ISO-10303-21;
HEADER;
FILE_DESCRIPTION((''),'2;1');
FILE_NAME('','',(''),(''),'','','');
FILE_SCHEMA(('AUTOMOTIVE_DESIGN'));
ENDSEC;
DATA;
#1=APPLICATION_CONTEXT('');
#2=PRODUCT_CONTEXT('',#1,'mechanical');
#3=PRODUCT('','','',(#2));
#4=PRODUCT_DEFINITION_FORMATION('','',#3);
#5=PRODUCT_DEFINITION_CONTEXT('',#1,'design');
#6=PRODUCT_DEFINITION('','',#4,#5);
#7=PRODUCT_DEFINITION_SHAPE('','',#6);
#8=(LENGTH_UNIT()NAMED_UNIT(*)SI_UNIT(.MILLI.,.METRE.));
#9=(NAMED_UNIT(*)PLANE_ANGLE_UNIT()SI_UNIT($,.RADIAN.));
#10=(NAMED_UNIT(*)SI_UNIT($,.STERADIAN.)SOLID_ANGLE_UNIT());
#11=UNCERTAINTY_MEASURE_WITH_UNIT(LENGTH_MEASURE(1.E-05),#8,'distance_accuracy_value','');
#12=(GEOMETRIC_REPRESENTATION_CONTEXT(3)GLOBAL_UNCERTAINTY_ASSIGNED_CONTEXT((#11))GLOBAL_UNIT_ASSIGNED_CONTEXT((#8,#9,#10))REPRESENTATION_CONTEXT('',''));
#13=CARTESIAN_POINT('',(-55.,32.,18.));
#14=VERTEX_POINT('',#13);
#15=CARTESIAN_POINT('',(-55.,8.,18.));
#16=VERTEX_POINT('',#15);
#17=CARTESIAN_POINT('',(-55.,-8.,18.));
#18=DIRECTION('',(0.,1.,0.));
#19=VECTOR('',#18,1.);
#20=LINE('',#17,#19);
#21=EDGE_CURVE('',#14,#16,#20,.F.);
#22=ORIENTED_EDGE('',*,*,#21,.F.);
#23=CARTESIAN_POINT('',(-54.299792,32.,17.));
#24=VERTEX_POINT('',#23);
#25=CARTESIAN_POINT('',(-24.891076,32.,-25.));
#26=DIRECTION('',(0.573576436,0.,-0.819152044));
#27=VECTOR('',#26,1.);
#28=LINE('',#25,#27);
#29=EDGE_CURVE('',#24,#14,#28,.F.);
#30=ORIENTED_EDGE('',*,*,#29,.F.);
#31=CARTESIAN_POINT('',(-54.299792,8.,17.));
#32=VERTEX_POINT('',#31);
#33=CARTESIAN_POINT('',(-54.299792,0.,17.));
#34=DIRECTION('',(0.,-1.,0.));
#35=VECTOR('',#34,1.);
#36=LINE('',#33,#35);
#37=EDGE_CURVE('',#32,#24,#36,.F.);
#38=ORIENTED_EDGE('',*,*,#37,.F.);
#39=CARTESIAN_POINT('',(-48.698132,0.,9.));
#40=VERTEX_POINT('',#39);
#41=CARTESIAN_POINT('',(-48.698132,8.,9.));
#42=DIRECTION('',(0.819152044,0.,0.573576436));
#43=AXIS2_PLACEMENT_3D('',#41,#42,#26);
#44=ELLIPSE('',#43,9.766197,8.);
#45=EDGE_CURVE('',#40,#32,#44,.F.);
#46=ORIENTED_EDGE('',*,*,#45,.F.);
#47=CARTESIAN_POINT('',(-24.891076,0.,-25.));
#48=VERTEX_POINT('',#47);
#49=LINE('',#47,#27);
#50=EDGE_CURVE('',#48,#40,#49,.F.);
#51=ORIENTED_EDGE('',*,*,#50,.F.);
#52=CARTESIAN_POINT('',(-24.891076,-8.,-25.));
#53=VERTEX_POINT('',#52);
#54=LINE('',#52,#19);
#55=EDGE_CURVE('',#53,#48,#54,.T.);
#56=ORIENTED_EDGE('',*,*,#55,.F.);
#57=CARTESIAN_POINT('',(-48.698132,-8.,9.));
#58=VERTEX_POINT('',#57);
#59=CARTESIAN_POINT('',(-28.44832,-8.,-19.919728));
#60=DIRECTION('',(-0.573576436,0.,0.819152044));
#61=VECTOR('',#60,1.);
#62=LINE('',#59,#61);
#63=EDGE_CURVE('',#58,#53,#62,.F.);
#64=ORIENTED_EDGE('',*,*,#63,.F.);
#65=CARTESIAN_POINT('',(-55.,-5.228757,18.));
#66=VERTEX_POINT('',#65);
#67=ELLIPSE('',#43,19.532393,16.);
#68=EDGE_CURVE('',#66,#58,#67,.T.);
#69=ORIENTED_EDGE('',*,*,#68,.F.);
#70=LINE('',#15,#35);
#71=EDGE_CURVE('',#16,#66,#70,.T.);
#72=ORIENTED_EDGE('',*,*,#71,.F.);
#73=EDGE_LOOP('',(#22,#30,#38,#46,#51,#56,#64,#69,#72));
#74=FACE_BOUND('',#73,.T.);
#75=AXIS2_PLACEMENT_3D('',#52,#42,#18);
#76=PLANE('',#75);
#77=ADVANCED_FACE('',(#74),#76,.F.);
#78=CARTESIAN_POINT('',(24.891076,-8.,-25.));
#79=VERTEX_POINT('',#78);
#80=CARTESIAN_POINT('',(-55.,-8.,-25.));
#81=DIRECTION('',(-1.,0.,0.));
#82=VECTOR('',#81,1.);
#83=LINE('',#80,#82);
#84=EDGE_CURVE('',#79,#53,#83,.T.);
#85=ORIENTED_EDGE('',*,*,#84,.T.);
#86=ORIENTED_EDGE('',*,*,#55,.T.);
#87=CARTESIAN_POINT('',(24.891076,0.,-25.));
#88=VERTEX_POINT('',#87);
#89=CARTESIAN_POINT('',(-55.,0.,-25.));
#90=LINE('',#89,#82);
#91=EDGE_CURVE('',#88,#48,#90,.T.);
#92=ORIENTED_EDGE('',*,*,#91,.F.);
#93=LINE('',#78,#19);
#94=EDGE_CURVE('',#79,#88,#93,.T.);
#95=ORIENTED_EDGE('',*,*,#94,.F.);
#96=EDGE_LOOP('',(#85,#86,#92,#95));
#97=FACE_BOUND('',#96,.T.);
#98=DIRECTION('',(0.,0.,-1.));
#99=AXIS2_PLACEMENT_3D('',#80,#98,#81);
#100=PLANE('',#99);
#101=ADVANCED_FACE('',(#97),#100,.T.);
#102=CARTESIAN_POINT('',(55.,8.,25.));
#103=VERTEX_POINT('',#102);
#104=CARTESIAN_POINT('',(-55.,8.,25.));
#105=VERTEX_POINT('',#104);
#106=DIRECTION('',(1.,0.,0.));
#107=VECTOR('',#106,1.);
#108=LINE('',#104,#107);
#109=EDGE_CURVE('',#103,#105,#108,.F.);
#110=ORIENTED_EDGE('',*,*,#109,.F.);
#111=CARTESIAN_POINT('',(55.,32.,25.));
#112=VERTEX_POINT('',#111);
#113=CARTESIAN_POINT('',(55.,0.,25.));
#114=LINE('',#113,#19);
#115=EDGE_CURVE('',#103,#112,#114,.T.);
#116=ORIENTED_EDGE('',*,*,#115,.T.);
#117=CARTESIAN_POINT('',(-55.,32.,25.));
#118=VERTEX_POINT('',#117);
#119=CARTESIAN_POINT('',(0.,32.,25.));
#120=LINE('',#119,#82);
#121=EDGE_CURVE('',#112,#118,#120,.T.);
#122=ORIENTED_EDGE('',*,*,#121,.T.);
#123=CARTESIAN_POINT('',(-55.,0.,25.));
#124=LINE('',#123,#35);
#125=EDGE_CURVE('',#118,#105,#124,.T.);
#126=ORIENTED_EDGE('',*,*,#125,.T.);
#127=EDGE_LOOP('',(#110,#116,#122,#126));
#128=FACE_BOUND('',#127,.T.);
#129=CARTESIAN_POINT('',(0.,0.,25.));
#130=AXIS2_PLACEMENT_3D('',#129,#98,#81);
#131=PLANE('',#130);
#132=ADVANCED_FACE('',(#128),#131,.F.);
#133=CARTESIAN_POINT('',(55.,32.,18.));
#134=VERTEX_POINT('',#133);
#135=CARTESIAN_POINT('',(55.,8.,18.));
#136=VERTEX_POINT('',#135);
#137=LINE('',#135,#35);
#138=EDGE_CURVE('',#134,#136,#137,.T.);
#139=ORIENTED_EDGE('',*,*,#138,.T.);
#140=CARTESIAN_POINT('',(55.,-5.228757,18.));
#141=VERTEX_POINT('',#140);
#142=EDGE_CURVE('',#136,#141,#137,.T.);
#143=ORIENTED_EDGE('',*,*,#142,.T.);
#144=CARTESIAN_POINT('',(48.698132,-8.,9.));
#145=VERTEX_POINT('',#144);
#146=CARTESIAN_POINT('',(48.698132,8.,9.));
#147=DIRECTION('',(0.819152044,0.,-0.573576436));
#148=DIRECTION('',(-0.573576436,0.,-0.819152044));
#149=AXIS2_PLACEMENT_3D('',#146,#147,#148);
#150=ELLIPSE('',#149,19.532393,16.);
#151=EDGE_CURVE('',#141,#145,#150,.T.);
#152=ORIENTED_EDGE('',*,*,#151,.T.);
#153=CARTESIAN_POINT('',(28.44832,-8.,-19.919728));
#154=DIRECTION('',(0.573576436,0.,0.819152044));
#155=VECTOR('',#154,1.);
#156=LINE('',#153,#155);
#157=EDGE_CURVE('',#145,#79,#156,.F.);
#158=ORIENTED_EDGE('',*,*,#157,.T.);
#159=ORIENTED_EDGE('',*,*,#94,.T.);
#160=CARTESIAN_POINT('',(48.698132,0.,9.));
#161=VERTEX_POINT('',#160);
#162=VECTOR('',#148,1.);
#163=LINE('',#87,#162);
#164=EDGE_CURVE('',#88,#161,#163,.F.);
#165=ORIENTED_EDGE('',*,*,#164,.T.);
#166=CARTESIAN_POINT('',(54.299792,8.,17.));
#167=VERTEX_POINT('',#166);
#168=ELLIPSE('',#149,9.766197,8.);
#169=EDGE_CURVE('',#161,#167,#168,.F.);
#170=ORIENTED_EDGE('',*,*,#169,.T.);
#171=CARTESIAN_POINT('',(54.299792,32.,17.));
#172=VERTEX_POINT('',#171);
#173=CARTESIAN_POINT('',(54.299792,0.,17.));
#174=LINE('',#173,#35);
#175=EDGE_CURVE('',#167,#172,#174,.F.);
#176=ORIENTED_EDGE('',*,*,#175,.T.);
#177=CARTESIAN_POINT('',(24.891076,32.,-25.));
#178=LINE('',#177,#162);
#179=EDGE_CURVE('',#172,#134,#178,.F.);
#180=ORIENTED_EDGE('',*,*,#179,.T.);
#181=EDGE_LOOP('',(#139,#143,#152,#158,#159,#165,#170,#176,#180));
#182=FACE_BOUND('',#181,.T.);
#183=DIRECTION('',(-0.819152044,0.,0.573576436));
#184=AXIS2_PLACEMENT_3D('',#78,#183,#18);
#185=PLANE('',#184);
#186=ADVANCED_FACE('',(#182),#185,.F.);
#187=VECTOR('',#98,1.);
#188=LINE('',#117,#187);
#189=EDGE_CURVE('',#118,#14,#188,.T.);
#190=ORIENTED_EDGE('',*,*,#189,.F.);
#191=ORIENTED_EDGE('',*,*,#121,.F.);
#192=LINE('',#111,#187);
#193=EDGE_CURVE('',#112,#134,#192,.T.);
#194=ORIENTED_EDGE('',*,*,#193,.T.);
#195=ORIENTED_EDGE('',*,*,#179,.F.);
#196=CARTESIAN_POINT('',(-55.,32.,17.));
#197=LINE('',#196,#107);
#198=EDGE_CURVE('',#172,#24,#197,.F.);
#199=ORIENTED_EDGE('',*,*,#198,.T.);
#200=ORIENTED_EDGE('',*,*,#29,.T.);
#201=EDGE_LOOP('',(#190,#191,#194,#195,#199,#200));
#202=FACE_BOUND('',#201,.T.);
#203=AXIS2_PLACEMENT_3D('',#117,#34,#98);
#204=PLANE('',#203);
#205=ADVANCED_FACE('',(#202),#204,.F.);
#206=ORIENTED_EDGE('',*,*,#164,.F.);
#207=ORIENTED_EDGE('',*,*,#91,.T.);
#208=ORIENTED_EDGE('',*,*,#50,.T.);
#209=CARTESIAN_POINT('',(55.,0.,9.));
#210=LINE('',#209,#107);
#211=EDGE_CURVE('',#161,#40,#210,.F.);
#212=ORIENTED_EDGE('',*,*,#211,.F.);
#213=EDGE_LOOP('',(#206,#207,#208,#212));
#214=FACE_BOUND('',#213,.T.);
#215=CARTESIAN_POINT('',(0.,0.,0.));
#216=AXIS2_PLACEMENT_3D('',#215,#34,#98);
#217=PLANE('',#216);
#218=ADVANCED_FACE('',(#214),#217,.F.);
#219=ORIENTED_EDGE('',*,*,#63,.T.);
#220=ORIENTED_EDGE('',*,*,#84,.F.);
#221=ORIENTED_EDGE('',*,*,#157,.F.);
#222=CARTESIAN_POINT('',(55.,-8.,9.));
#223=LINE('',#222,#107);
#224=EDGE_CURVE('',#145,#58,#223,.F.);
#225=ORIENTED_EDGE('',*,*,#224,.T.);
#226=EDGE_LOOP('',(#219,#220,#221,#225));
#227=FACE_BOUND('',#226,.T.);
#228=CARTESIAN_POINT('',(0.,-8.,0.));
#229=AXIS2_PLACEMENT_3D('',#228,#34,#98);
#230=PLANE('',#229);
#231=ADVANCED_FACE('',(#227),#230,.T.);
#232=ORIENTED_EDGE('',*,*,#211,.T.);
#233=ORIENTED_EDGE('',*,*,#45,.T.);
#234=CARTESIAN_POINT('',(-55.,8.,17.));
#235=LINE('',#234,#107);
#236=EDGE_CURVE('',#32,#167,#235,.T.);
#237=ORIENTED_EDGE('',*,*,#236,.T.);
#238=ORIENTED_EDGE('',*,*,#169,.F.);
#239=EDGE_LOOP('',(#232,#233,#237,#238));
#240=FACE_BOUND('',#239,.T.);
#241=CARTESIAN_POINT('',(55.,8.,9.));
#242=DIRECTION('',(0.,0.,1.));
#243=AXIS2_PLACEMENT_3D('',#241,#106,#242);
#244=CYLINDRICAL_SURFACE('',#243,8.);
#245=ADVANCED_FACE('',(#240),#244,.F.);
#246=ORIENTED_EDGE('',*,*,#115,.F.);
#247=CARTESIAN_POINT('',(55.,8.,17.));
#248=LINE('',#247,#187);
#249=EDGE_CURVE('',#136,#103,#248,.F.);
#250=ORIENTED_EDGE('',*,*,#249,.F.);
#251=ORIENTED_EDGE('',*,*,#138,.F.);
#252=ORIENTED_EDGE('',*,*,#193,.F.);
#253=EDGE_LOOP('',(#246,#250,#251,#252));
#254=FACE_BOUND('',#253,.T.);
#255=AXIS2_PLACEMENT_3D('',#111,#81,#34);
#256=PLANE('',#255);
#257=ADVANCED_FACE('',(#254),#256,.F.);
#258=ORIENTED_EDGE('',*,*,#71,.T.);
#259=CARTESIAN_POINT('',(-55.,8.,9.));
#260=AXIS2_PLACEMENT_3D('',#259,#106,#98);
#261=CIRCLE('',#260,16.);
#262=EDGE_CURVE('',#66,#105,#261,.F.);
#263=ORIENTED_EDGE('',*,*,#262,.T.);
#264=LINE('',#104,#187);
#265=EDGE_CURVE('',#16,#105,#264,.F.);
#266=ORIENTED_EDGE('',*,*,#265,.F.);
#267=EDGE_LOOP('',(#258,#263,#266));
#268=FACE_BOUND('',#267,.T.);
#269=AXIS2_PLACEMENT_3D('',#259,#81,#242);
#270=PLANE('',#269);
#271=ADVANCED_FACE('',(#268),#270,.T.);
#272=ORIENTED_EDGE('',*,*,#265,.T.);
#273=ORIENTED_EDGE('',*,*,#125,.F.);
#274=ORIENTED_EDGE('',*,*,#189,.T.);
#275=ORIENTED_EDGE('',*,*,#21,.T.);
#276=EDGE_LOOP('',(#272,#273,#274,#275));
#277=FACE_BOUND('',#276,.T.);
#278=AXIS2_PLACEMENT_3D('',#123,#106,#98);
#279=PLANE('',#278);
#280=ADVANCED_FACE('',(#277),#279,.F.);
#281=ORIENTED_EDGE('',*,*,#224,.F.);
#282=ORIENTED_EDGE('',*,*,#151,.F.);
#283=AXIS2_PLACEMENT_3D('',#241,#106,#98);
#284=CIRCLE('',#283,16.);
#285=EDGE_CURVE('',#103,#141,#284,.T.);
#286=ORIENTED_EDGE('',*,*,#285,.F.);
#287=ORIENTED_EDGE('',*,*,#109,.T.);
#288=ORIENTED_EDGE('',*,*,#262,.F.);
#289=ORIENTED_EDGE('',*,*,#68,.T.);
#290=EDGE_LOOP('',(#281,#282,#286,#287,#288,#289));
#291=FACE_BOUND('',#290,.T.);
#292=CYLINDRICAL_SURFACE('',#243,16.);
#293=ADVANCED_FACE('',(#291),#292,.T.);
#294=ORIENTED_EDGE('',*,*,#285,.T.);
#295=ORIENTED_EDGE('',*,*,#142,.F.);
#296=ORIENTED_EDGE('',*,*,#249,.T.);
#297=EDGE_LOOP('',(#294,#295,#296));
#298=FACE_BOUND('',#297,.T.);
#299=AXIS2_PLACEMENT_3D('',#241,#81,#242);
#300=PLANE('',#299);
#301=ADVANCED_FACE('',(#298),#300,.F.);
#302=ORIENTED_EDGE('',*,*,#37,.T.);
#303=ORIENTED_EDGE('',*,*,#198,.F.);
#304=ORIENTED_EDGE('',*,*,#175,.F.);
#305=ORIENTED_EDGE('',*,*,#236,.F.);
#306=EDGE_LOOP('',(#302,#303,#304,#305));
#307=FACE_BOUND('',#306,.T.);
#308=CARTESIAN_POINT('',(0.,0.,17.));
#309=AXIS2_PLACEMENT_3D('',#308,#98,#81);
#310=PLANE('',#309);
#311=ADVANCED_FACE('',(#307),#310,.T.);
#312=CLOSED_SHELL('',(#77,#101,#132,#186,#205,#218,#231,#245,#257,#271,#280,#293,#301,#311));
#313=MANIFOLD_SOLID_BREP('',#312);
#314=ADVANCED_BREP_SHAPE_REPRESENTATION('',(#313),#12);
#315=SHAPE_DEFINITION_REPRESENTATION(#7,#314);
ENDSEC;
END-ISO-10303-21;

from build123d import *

# Parameters (mm, degrees)
SKETCH1_W                    = 110
SKETCH1_H                    = 50
BASE_FLANGE1_DEPTH           = 8
EDGE_FLANGE1_STRIP_W         = 48
EDGE_FLANGE1_STRIP_H         = 8
EDGE_FLANGE1_STRIP_CUT_DEPTH = 110
EDGE_FLANGE1_DEPTH           = 110
CHAMFER1_SIZE                = 43
CHAMFER1_SIZE2               = 30.108924143
MIRROR2_START                = 34.728986582
MIRROR2_OUTLINE_W            = 56
MIRROR2_OUTLINE_H            = 41
MIRROR2_DEPTH                = 24.663786763


# Read off the part's stored shape, not the designer's step: Mirror2
# Sheet-metal steps are written as plain solids
with BuildPart() as part:
    # Sketch1 → Base-Flange1 (new body)
    with BuildSketch(Plane(origin=(0, 0, 0), x_dir=(1, 0, 0), z_dir=(0, 1, 0))):
        Rectangle(SKETCH1_W, SKETCH1_H)
    extrude(amount=-BASE_FLANGE1_DEPTH)

    # Edge-Flange1 strip (across the edge) → Edge-Flange1 strip cut (cut)
    with BuildSketch(Plane(origin=(-55, 0, 25), x_dir=(0, 0, -1), z_dir=(1, 0, 0))):
        with Locations((-8, -4)):
            Rectangle(EDGE_FLANGE1_STRIP_W, EDGE_FLANGE1_STRIP_H)
    extrude(amount=EDGE_FLANGE1_STRIP_CUT_DEPTH, mode=Mode.SUBTRACT)

    # Edge-Flange1 section (across the edge) → Edge-Flange1 (add)
    with BuildSketch(Plane(origin=(-55, 0, 25), x_dir=(0, 0, -1), z_dir=(1, 0, 0))):
        with BuildLine():
            Line((0, 8), (0, 32))
            Line((0, 32), (8, 32))
            Line((8, 32), (8, 8))
            ThreePointArc((8, 8), (10.343145751, 2.343145751), (16, 0))
            Line((16, 0), (16, -8))
            ThreePointArc((16, -8), (4.686291501, -3.313708499), (0, 8))
        make_face()
    extrude(amount=EDGE_FLANGE1_DEPTH)

    # Chamfer1
    chamfer1_edges = [part.edges().sort_by_distance(p)[0] for p in [
        (-55, -4, -25),
    ]]
    chamfer1_side = [part.faces().sort_by_distance(p)[0] for p in [
        (-55, -0.640312424, -8),
    ]]
    chamfer(chamfer1_edges, length=CHAMFER1_SIZE, length2=CHAMFER1_SIZE2, reference=chamfer1_side[0])

    # Mirror2 outline → Mirror2 (cut)
    with BuildSketch(Plane(origin=(0, 0, 0), x_dir=(0.5735764363510512, 0, 0.8191520442889882), z_dir=(0.8191520442889882, 0, -0.5735764363510512)).offset(MIRROR2_START)):
        with Locations((20, -12.5)):
            Rectangle(MIRROR2_OUTLINE_W, MIRROR2_OUTLINE_H)
    extrude(amount=MIRROR2_DEPTH, mode=Mode.SUBTRACT)


solid = part.part
